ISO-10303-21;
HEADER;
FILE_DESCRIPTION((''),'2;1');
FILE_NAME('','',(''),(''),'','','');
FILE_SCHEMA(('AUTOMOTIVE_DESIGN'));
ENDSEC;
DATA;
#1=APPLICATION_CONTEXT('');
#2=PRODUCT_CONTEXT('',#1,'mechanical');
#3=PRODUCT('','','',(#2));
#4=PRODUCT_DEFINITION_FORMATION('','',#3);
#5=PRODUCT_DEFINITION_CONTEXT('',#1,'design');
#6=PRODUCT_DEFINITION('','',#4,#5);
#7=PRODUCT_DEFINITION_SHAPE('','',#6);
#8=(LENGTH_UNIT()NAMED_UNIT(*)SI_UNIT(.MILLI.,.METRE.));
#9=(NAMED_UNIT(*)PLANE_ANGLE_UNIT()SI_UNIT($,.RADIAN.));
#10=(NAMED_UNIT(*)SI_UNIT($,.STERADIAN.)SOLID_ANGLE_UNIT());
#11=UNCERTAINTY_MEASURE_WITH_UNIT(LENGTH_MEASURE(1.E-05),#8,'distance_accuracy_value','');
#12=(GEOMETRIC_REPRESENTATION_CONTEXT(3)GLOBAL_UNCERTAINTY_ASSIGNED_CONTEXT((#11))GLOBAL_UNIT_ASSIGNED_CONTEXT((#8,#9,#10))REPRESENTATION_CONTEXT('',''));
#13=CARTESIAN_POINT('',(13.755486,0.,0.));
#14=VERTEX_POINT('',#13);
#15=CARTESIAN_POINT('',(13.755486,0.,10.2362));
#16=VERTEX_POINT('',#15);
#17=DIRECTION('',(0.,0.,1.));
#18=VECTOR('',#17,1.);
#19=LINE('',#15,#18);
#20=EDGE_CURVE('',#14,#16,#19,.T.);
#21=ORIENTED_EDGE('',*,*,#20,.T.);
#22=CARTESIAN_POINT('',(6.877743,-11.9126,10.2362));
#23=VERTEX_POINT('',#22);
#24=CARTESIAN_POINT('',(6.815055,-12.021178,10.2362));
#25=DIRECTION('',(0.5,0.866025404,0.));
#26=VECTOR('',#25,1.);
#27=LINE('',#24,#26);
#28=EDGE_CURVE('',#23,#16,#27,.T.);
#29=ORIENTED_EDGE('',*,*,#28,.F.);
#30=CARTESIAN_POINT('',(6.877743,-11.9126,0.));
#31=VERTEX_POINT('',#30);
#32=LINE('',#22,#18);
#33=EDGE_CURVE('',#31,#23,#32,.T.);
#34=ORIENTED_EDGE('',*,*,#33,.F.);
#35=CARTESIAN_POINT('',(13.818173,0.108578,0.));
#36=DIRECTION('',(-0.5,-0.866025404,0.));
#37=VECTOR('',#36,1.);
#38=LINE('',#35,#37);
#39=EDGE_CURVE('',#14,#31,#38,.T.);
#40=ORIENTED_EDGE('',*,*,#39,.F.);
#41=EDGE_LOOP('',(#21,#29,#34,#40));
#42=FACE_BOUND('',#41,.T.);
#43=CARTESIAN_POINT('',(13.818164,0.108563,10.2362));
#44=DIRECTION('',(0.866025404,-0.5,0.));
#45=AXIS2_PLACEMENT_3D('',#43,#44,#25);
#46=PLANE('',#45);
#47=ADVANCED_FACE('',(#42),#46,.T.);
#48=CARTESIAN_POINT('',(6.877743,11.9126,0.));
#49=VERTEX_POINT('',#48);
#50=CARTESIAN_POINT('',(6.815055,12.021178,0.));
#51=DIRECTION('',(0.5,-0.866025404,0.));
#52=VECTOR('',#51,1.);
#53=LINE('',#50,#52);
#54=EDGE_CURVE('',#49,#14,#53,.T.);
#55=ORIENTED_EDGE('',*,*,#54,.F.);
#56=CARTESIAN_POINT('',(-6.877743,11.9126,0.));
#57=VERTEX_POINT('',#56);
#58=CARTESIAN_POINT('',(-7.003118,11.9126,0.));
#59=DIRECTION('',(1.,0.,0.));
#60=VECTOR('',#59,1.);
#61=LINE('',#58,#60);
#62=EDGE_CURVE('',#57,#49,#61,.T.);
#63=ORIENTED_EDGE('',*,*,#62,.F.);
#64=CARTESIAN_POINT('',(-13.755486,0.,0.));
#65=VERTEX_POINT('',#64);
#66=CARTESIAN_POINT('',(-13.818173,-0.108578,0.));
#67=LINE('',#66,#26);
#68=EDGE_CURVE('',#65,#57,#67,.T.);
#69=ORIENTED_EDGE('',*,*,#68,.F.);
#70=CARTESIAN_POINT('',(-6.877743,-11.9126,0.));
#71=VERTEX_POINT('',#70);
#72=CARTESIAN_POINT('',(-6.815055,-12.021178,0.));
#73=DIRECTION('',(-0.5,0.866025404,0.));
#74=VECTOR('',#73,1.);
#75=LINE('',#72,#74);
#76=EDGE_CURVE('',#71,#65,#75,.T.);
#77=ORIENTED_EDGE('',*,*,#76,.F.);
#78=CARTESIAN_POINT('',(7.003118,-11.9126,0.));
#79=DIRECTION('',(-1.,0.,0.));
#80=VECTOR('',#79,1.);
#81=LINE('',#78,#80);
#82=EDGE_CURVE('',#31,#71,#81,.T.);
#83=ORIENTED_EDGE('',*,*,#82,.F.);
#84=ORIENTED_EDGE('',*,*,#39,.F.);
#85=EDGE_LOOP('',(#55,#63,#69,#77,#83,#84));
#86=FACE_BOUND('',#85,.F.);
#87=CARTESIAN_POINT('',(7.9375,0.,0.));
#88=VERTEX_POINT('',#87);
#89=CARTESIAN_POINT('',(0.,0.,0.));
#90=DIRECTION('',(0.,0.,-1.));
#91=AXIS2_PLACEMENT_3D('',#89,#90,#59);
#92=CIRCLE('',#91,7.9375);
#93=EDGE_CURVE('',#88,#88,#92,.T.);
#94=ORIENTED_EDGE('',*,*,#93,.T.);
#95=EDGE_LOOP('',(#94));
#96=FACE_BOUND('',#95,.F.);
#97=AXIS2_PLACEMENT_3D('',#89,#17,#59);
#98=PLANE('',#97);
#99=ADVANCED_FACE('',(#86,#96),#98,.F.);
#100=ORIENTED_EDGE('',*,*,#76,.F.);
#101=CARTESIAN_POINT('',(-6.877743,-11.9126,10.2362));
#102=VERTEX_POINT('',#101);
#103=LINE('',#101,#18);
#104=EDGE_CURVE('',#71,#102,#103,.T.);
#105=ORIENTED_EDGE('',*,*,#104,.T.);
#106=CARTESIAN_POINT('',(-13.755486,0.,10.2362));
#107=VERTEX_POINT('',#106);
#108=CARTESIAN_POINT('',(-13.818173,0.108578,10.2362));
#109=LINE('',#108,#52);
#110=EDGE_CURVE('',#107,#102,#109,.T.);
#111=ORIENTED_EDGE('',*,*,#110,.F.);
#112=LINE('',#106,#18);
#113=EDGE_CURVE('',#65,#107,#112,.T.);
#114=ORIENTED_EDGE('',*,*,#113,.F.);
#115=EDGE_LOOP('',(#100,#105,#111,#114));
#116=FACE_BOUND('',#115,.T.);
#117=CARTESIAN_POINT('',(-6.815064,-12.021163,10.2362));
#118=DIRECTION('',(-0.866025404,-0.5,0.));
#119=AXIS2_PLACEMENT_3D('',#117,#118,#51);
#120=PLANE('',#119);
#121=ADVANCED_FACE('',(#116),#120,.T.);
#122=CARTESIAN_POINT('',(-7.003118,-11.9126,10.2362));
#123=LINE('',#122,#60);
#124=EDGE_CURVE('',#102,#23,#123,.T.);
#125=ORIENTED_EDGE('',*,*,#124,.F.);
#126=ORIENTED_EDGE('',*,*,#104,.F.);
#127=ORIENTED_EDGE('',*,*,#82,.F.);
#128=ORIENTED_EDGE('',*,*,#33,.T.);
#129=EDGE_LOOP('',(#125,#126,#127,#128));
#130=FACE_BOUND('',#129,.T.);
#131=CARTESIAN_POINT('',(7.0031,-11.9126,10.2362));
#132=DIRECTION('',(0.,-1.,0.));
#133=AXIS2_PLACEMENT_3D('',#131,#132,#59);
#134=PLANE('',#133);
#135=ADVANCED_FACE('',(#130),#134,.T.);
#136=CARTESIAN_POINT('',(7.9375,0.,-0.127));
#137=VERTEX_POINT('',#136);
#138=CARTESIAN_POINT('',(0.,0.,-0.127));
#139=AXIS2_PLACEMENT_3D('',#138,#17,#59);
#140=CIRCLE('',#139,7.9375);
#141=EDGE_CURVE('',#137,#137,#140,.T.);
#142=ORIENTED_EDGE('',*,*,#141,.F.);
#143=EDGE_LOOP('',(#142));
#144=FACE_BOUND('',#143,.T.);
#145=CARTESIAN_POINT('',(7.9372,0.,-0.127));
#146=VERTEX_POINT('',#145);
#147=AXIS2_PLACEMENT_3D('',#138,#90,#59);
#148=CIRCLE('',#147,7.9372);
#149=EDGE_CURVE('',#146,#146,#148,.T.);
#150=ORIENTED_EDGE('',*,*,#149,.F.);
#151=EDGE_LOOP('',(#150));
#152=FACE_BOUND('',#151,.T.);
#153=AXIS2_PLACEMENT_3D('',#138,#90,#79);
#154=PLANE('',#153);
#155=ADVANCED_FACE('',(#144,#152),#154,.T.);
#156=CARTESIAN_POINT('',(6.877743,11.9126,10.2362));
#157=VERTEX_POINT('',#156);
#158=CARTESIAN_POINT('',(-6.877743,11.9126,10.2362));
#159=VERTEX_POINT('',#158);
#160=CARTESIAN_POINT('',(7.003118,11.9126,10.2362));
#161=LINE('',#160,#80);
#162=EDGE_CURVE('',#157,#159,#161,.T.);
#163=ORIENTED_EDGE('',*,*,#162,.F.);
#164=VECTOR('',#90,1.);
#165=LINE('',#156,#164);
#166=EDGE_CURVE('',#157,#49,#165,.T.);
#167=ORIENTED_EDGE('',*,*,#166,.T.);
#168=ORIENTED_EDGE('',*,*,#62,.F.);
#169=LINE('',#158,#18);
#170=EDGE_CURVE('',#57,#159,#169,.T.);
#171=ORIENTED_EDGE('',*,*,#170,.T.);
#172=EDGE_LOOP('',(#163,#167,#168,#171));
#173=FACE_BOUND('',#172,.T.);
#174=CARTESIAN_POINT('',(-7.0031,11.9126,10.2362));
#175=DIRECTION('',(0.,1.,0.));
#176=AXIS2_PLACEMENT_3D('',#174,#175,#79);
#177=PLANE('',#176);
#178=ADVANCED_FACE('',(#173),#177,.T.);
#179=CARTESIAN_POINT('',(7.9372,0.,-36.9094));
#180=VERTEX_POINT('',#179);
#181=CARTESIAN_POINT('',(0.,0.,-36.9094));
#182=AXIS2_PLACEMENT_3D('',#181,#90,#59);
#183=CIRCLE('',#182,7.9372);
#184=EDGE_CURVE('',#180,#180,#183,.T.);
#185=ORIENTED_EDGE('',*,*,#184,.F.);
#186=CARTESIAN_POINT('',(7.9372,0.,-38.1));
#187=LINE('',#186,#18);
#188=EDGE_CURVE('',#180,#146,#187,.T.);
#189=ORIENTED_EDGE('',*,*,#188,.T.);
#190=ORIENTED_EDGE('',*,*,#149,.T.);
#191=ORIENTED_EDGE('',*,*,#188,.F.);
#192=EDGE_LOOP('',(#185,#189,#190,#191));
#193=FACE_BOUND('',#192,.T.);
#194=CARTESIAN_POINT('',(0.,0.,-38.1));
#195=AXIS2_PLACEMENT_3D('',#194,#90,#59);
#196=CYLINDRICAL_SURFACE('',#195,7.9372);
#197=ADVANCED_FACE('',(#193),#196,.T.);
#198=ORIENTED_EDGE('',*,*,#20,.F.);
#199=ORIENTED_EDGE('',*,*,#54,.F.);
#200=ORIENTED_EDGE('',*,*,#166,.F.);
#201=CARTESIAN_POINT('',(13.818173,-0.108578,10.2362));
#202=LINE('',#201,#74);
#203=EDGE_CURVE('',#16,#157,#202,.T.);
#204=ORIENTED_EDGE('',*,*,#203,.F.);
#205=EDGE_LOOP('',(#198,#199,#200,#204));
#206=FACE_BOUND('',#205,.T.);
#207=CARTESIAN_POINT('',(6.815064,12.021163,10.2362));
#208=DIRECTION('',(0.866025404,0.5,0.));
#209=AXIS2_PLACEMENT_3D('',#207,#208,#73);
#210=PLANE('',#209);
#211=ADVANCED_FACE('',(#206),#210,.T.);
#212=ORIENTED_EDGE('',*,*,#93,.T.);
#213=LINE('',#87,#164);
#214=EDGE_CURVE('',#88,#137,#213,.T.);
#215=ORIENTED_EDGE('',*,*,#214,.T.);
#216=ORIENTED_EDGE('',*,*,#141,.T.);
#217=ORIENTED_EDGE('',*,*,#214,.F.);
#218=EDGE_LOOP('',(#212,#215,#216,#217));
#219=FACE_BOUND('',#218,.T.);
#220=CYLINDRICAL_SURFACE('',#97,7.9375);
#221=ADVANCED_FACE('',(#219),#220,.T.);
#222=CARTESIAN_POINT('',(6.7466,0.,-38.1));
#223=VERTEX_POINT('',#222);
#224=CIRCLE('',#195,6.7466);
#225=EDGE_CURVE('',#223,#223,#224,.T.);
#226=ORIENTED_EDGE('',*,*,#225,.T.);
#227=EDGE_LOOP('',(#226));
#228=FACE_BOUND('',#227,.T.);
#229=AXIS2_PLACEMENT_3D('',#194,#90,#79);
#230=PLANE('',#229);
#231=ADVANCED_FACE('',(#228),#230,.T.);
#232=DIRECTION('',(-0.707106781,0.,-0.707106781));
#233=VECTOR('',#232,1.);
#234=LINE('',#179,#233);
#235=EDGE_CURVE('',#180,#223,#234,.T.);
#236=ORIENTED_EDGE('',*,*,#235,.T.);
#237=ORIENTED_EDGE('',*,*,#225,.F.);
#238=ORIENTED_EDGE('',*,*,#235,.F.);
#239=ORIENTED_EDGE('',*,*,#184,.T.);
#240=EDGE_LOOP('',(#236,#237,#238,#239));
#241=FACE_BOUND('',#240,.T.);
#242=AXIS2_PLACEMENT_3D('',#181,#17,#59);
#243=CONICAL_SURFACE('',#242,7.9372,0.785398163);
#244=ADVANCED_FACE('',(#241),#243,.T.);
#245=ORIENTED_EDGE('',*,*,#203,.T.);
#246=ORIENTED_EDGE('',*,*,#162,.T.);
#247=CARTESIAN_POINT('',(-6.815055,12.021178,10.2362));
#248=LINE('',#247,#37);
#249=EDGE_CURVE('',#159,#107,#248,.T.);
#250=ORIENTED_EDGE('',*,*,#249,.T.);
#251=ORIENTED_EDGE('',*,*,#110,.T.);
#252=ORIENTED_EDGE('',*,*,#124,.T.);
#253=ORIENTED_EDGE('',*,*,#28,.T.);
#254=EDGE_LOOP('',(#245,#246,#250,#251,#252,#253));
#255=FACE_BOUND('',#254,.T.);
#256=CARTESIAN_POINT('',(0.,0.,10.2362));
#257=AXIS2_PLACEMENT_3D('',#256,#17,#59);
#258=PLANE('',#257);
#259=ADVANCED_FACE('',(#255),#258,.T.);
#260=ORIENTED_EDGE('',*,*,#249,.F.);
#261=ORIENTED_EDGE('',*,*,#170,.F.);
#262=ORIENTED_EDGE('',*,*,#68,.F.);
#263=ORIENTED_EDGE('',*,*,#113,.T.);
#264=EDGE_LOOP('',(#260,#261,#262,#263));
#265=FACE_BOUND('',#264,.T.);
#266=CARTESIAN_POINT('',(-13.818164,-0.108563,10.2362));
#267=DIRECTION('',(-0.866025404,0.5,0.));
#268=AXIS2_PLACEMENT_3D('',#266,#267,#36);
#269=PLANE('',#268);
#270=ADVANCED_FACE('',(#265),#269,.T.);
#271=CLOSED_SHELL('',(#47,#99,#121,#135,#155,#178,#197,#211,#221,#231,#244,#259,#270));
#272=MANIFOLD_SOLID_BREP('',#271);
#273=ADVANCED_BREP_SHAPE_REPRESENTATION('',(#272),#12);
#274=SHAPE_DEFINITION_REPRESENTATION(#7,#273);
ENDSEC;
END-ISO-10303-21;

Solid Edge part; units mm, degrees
sketch "Sketch1" plane through (0, 0, 0) normal (0, 0, 1) x (1, 0, 0)
  circle A0 centre (0, 0) radius 13.8186
  dimension "D1" = 27.6372
extrude "Protrusion1" add sketch "Sketch1" along normal blind 10.2362
sketch "Sketch2" plane through (0, 0, 0) normal (0, 0, -1) x (1, 0, 0)
  circle A0 centre (0, 0) radius 7.9375
extrude "Protrusion2" add sketch "Sketch2" along normal blind 38.1
sketch "Sketch3" plane through (0, 0, -38.1) normal (0, 0, -1) x (1, 0, 0)
  circle A0 centre (0, 0) radius 7.9372
extrude "Cutout1" cut sketch "Sketch3" against normal blind 37.973 flip side to cut
chamfer "Chamfer_1" distance 1.1906 angle 45 1 edges at (-7.9372, 0, -38.1)
sketch "Sketch4" plane through (0, 0, 10.2362) normal (0, 0, 1) x (1, 0, 0)
  line L0 (-7.0031, 11.9126) -> (7.0031, 11.9126)
  dimension "D1" = 23.8252
extrude "Cutout2" cut sketch "Sketch4" against normal up to next material side at (0, 11.9626, 10.2362)
pattern_circular "Pattern1" count 6 over 360 about axis through (0, 0, 10.2362) along (0, 0, 1) of "Cutout2"
properties part number "117666"
